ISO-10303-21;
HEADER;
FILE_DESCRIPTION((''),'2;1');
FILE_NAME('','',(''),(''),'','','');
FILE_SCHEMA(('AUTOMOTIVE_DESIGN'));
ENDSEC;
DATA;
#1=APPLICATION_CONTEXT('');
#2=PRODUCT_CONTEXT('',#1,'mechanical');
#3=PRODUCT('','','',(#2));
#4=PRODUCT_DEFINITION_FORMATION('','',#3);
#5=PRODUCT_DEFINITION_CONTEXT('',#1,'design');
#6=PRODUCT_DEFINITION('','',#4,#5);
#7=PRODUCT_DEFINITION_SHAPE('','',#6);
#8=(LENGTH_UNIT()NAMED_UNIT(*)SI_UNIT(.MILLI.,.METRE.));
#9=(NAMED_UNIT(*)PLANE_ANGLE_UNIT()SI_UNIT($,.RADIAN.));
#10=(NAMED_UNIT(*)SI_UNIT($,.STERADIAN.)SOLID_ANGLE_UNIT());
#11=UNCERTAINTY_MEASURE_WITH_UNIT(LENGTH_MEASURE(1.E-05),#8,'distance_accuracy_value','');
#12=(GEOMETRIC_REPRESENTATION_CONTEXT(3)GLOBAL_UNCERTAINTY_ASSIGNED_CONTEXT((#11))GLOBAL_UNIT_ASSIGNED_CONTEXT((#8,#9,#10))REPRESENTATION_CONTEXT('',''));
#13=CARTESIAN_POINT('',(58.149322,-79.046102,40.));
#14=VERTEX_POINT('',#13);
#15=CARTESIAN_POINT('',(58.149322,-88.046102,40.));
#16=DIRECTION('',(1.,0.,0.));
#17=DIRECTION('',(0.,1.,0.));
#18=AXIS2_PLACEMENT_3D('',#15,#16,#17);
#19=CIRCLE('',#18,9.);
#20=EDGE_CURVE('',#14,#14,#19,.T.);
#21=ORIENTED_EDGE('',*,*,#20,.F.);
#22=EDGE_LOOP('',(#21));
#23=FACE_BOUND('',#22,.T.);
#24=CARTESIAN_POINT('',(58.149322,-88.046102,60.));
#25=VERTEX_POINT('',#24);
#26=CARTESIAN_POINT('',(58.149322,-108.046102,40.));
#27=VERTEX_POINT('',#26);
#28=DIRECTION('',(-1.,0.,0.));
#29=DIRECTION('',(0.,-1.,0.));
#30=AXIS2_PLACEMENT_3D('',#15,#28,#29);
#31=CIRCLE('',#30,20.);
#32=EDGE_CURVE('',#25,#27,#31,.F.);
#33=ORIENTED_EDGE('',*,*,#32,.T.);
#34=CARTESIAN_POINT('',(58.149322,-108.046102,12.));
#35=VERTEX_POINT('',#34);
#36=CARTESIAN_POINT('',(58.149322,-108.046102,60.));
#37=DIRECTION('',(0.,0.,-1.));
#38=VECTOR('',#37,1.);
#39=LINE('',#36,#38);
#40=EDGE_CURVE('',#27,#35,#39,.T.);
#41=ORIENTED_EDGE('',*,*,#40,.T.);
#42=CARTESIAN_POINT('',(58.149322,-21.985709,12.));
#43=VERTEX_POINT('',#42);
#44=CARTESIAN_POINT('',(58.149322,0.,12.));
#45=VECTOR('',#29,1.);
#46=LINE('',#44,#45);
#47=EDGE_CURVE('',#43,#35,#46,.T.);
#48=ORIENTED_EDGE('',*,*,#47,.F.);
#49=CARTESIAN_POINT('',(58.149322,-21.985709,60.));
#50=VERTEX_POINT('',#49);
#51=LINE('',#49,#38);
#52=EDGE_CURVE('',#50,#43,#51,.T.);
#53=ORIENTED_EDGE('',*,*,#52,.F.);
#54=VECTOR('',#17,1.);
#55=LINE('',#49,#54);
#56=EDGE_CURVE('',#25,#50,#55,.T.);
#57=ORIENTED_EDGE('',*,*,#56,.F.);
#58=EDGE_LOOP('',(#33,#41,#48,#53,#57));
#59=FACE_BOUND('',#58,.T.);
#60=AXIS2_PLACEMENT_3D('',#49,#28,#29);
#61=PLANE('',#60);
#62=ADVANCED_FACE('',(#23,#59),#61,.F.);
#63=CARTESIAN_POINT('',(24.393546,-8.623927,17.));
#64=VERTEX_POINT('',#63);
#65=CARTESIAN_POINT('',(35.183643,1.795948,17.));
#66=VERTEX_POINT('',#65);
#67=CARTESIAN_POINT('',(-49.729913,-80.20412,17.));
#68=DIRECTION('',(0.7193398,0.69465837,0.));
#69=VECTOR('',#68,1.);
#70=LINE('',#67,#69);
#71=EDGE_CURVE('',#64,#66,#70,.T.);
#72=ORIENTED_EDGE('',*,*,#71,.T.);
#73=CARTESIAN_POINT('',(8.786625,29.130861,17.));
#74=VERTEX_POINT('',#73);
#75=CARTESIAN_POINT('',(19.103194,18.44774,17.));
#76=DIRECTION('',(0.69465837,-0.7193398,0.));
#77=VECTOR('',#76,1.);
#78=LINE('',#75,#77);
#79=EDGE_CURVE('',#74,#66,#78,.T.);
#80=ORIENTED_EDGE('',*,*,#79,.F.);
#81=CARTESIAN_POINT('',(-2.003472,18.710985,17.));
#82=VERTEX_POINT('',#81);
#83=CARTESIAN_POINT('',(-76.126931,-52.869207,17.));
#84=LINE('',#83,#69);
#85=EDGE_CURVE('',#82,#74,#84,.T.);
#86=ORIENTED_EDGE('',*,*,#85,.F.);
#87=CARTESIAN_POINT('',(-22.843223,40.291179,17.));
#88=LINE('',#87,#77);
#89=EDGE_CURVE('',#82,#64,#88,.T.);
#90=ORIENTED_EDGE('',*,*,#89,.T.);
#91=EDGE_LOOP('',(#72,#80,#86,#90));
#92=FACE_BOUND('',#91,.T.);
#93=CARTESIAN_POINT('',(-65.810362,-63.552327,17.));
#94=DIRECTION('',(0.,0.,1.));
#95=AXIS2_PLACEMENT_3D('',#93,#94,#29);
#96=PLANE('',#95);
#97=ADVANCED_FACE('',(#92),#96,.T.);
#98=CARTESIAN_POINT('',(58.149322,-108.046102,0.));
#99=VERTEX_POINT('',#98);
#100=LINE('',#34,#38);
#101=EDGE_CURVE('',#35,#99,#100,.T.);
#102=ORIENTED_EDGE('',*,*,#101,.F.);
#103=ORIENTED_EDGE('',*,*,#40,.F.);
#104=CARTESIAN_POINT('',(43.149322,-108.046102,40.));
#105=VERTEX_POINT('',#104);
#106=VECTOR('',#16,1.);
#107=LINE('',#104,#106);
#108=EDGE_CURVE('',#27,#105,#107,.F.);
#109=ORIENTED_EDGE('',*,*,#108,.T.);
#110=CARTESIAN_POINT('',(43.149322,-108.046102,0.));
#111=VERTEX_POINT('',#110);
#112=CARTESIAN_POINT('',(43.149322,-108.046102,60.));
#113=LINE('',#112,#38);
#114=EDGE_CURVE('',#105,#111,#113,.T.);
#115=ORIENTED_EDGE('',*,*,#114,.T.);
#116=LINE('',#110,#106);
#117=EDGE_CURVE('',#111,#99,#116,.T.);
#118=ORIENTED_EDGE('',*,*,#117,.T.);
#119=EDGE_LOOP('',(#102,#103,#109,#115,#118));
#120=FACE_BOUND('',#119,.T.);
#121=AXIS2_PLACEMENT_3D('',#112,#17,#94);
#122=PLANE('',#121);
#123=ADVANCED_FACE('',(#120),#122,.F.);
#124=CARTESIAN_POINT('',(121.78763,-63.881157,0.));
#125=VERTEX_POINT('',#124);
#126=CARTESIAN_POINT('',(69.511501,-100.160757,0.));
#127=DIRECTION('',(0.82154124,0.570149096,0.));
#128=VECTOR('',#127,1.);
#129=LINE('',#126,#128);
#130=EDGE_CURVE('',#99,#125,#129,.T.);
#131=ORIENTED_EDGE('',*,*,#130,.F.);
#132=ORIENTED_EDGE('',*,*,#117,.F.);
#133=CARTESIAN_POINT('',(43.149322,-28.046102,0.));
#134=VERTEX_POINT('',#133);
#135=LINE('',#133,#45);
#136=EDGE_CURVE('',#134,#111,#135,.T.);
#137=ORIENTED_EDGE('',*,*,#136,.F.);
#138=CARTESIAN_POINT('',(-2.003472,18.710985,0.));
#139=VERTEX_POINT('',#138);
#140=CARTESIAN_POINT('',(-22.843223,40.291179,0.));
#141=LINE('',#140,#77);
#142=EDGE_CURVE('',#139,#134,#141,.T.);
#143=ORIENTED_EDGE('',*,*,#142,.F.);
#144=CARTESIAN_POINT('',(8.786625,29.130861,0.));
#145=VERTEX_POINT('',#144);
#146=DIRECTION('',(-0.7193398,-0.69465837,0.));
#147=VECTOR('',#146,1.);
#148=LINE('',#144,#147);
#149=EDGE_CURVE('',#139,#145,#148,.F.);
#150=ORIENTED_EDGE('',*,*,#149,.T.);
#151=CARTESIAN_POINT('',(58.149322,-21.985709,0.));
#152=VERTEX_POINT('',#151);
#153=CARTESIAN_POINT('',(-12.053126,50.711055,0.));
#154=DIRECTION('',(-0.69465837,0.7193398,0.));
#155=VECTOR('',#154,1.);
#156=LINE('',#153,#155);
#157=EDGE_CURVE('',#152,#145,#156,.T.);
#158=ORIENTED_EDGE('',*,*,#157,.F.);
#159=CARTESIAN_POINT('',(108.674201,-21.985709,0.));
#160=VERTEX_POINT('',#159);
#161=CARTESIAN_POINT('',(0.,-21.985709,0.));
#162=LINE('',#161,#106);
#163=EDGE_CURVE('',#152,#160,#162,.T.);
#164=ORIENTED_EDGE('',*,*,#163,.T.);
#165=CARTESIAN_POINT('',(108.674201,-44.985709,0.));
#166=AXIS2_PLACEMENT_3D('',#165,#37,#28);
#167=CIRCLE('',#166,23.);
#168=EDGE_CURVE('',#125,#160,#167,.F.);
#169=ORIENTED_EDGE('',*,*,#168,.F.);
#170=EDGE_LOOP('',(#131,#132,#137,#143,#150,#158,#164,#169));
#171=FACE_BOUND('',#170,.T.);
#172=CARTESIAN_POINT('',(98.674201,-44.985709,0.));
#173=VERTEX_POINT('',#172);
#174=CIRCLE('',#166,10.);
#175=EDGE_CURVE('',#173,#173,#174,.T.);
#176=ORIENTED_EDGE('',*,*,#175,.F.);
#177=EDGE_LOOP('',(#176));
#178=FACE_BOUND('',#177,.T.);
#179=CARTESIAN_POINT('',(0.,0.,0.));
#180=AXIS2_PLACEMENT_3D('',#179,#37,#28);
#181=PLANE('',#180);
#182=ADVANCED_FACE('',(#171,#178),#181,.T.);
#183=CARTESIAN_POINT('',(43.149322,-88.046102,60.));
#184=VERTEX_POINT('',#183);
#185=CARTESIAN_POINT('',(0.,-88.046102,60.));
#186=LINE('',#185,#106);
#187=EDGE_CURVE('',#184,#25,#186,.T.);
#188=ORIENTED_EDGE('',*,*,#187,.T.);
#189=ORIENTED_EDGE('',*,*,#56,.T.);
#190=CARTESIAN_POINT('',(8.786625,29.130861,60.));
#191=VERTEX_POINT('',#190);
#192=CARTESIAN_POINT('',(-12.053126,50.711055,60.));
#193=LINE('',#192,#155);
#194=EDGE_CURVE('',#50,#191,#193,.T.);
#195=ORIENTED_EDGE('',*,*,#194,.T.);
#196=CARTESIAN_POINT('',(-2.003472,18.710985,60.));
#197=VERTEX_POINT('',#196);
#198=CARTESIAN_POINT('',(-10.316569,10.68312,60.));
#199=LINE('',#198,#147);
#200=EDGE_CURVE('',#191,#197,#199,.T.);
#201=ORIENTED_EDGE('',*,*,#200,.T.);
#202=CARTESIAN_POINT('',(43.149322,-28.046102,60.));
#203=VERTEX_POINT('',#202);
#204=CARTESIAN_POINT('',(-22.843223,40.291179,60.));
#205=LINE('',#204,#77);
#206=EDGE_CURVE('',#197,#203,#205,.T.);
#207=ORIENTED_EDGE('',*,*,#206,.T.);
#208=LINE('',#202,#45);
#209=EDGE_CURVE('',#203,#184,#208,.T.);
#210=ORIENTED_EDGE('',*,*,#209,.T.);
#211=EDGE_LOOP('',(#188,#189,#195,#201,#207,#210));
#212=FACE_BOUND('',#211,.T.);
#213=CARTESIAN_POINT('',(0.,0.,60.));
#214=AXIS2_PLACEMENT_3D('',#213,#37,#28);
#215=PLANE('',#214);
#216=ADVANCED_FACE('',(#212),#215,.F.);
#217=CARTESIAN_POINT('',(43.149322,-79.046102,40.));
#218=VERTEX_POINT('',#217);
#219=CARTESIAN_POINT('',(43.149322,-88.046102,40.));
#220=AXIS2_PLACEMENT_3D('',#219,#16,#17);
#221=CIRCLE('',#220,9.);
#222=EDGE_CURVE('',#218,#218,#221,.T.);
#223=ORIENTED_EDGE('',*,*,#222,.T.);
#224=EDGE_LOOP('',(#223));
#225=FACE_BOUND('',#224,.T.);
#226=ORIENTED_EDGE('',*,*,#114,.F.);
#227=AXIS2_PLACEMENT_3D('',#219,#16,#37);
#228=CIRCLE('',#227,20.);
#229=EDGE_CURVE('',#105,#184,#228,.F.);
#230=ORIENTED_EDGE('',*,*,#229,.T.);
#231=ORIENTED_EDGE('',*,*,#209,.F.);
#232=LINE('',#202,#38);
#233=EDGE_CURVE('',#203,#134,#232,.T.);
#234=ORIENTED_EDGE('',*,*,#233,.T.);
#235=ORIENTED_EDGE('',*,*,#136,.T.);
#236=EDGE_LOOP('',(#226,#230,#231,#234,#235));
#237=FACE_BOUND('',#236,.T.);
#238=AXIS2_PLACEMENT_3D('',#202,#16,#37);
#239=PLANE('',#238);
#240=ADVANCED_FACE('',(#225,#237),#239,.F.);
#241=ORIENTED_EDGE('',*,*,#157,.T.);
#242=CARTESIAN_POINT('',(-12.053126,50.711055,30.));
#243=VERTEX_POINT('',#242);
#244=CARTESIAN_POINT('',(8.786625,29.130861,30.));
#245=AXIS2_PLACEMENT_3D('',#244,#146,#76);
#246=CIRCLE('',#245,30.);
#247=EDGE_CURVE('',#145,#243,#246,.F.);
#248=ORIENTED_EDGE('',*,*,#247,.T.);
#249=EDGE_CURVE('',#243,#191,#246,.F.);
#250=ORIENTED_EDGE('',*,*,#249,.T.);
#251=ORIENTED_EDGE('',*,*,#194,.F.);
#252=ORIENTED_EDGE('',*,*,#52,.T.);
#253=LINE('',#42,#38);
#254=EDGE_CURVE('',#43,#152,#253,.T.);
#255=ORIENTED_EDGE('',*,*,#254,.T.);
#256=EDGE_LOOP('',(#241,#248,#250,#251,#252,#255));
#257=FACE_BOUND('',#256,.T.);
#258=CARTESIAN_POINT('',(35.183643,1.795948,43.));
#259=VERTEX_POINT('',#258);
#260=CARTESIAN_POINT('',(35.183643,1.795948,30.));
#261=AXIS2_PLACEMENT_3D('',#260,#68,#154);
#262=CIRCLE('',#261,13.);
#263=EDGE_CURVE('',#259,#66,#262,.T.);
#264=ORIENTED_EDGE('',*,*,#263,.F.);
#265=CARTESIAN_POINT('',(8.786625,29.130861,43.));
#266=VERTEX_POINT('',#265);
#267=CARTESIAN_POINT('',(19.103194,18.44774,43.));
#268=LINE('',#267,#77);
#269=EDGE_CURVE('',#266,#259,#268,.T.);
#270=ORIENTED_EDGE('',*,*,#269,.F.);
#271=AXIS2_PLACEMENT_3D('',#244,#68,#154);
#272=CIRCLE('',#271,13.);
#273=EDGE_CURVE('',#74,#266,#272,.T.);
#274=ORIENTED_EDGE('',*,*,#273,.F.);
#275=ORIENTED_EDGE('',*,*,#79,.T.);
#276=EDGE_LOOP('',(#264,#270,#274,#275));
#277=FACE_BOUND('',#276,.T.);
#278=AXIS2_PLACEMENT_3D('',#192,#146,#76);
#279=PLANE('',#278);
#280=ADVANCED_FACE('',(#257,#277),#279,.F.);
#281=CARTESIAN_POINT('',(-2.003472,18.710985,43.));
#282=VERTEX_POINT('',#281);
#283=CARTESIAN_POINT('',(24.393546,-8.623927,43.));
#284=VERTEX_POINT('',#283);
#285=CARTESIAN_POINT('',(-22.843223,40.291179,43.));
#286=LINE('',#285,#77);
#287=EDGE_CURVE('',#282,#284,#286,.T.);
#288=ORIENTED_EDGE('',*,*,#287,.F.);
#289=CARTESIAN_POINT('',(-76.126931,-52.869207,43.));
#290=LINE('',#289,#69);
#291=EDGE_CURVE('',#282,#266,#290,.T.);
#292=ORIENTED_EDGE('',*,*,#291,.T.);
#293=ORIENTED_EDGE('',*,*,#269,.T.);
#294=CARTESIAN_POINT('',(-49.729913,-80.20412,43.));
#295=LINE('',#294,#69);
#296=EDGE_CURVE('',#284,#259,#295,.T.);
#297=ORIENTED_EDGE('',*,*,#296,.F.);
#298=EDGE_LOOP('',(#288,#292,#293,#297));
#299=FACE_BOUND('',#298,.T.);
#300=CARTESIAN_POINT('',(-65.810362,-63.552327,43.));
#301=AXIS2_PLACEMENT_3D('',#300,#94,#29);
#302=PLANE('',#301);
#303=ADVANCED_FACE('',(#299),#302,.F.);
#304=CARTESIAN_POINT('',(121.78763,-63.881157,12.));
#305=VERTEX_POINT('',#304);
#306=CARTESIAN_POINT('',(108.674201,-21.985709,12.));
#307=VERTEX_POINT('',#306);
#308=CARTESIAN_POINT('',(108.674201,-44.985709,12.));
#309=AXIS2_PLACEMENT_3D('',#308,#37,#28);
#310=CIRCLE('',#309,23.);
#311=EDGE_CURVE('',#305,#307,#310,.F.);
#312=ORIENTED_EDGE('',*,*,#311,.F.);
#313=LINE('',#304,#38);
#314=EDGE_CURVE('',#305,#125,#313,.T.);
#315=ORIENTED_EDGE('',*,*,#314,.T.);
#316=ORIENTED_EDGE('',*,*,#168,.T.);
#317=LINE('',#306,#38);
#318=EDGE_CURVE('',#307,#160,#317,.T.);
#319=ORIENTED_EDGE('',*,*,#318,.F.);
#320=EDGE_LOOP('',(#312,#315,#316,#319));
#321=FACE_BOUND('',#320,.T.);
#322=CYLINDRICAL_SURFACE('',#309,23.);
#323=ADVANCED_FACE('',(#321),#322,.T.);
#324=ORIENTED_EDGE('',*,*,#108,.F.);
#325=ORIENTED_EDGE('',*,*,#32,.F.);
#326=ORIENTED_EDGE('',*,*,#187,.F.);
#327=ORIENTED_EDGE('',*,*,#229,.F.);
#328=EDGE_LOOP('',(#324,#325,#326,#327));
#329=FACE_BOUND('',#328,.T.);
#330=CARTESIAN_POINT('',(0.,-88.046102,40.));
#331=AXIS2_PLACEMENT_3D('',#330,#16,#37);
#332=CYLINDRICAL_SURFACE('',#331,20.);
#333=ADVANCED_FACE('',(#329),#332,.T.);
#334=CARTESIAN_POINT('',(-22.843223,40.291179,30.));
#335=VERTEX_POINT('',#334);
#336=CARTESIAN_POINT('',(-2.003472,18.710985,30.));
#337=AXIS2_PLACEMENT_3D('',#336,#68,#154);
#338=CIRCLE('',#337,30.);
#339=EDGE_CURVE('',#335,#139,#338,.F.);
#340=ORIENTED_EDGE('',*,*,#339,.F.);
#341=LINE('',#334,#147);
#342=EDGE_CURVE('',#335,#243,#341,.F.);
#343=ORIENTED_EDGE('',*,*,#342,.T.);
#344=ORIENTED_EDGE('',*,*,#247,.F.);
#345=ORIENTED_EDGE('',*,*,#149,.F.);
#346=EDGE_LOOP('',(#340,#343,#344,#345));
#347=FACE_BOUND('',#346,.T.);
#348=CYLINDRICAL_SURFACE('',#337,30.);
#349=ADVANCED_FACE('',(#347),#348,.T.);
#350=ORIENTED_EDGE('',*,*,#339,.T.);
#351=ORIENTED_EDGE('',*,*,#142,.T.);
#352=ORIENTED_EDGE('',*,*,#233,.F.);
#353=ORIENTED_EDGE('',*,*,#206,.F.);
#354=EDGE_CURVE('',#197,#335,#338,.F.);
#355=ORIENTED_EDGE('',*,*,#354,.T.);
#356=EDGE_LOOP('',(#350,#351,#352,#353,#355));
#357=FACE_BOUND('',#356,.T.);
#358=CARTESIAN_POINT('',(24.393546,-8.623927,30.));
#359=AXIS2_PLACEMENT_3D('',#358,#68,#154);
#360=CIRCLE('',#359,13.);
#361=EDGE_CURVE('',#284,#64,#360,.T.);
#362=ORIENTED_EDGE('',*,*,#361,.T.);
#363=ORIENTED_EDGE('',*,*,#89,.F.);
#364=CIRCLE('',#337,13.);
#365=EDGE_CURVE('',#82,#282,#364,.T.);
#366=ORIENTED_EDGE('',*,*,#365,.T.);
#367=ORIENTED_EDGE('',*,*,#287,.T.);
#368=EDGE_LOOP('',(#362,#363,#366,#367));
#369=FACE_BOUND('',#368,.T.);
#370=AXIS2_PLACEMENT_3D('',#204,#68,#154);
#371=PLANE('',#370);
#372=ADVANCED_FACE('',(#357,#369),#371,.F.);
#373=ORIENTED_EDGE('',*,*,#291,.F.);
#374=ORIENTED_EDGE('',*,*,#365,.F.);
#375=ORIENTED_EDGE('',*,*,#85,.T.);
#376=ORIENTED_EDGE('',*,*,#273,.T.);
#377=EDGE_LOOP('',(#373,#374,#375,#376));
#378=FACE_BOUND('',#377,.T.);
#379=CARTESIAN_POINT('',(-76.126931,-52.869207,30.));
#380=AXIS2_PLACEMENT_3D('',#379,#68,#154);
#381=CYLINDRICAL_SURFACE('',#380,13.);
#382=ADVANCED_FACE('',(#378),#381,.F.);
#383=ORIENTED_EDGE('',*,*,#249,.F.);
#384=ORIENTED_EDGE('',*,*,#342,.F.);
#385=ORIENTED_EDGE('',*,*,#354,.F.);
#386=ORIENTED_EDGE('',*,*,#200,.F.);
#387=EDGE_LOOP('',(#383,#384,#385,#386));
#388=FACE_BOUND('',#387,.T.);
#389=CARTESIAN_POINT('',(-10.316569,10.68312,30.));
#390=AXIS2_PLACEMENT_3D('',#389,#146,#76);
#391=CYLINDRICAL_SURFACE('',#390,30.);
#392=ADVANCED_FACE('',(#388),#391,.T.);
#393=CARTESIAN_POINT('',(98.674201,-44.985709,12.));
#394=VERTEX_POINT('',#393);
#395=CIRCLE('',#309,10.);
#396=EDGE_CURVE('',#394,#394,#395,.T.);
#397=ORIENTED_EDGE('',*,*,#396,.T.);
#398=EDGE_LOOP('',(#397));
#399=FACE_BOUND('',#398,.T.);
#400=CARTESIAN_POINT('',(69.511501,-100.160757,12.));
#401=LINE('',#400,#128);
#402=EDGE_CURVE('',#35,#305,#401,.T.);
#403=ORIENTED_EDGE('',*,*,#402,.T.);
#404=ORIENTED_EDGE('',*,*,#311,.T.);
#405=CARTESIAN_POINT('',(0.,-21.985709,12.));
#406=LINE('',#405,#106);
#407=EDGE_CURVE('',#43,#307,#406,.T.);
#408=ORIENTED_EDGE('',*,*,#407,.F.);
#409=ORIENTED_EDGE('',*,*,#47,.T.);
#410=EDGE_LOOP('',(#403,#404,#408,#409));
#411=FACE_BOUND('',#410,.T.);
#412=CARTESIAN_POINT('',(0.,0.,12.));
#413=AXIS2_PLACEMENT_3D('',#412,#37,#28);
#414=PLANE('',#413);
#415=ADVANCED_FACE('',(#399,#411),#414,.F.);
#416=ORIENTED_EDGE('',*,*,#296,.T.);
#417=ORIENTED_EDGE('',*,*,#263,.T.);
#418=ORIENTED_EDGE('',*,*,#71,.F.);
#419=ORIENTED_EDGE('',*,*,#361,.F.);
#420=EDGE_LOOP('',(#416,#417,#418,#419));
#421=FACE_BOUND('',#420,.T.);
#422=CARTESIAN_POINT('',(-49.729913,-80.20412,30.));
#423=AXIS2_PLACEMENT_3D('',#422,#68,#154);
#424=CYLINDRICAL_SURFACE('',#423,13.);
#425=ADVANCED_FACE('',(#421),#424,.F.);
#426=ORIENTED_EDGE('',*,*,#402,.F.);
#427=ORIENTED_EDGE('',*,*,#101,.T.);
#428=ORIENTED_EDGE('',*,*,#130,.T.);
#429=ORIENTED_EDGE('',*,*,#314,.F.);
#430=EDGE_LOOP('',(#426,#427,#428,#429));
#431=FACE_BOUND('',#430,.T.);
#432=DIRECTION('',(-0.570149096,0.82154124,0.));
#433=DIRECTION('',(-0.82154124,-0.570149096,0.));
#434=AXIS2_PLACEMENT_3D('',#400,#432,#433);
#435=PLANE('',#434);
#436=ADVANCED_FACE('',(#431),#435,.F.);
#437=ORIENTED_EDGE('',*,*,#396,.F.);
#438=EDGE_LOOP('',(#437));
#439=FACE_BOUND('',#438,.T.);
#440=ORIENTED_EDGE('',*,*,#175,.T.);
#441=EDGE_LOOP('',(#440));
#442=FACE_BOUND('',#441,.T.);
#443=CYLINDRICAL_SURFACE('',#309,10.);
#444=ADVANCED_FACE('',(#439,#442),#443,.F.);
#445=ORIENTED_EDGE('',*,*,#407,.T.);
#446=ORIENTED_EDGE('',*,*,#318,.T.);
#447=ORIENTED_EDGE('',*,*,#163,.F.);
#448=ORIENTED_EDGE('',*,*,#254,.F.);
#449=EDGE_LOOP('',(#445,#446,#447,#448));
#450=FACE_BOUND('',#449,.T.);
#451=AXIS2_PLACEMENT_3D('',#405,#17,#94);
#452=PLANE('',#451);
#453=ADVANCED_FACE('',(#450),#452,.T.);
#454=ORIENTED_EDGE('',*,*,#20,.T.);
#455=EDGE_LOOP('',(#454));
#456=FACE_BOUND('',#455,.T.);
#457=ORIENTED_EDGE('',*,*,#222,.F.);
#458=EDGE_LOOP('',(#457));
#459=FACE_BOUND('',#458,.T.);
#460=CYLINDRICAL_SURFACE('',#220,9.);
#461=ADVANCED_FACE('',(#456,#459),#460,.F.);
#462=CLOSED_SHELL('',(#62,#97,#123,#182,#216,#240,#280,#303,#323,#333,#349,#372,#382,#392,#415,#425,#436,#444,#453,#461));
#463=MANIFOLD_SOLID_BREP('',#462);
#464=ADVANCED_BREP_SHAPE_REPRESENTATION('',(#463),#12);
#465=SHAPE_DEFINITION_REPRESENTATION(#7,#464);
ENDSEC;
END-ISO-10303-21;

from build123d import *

# Parameters (mm, degrees)
EXTRUDE_1_DEPTH     = 60
FILLET_1_R          = 30
CUT_EXTRUDE_1_DEPTH = 147.1512713
SKETCH_4_R          = 10
EXTRUDE_3_DEPTH     = 12
FILLET_2_R          = 20
SKETCH_5_R          = 9
CUT_EXTRUDE_3_DEPTH = 15


with BuildPart() as part:
    # 스케치1 → 보스-돌출1 (new body)
    with BuildSketch(Plane.XY):
        Polygon((-22.843222842, 40.291179042), (43.149322352, -28.04610199), (43.149322352, -108.04610199), (58.149322352, -108.04610199), (58.149322352, -21.985708603), (-12.053125837, 50.711054599), align=None)
    extrude(amount=EXTRUDE_1_DEPTH)

    # 필렛1
    fillet_1_edges = [part.edges().sort_by_distance(p)[0] for p in [
        (-17.448174339, 45.50111682, 0),
        (-17.448174339, 45.50111682, 60),
    ]]
    fillet(fillet_1_edges, radius=FILLET_1_R - 0.0001)  # a hair under: the kernel refuses the full size

    # 스케치2 → 컷-돌출1 (cut, through all)
    with BuildSketch(Plane(origin=(19.103194466, 18.447740459, 0), x_dir=(0, 0, -1), z_dir=(0.7193398003386495, 0.694658370458999, 0))):
        with BuildLine():
            Line((-17, 14.851284643), (-17, -23.148715357))
            ThreePointArc((-17, -23.148715357), (-30, -36.148715357), (-43, -23.148715357))
            Line((-43, -23.148715357), (-43, 14.851284643))
            ThreePointArc((-43, 14.851284643), (-30, 27.851284643), (-17, 14.851284643))
        make_face()
    extrude(amount=-CUT_EXTRUDE_1_DEPTH, mode=Mode.SUBTRACT)

    # 스케치4 → 보스-돌출3 (add)
    with BuildSketch(Plane(origin=(0, 0, 0), x_dir=(-1, 0, 0), z_dir=(0, 0, -1))):
        with BuildLine():
            ThreePointArc((-121.787629996, -63.881157116), (-130.624090494, -38.115312537), (-108.674200792, -21.985708603))
            Line((-108.674200792, -21.985708603), (-58.149322352, -21.985708603))
            Line((-58.149322352, -21.985708603), (-58.149322352, -108.04610199))
            Line((-58.149322352, -108.04610199), (-121.787629996, -63.881157116))
        make_face()
        with Locations((-108.674200792, -44.985708603)):
            Circle(SKETCH_4_R, mode=Mode.SUBTRACT)
    extrude(amount=-EXTRUDE_3_DEPTH)

    # 필렛2
    fillet_2_edges = [part.edges().sort_by_distance(p)[0] for p in [
        (50.649322352, -108.04610199, 60),
    ]]
    fillet(fillet_2_edges, radius=FILLET_2_R)

    # 스케치5 → 컷-돌출3 (cut)
    with BuildSketch(Plane(origin=(58.149322352, 0, 0), x_dir=(0, 0, -1), z_dir=(1, 0, 0))):
        with Locations(Location((-40, -88.04610199, 0), (0, 0, 90))):
            Circle(SKETCH_5_R)
    extrude(amount=-CUT_EXTRUDE_3_DEPTH, mode=Mode.SUBTRACT)


solid = part.part
